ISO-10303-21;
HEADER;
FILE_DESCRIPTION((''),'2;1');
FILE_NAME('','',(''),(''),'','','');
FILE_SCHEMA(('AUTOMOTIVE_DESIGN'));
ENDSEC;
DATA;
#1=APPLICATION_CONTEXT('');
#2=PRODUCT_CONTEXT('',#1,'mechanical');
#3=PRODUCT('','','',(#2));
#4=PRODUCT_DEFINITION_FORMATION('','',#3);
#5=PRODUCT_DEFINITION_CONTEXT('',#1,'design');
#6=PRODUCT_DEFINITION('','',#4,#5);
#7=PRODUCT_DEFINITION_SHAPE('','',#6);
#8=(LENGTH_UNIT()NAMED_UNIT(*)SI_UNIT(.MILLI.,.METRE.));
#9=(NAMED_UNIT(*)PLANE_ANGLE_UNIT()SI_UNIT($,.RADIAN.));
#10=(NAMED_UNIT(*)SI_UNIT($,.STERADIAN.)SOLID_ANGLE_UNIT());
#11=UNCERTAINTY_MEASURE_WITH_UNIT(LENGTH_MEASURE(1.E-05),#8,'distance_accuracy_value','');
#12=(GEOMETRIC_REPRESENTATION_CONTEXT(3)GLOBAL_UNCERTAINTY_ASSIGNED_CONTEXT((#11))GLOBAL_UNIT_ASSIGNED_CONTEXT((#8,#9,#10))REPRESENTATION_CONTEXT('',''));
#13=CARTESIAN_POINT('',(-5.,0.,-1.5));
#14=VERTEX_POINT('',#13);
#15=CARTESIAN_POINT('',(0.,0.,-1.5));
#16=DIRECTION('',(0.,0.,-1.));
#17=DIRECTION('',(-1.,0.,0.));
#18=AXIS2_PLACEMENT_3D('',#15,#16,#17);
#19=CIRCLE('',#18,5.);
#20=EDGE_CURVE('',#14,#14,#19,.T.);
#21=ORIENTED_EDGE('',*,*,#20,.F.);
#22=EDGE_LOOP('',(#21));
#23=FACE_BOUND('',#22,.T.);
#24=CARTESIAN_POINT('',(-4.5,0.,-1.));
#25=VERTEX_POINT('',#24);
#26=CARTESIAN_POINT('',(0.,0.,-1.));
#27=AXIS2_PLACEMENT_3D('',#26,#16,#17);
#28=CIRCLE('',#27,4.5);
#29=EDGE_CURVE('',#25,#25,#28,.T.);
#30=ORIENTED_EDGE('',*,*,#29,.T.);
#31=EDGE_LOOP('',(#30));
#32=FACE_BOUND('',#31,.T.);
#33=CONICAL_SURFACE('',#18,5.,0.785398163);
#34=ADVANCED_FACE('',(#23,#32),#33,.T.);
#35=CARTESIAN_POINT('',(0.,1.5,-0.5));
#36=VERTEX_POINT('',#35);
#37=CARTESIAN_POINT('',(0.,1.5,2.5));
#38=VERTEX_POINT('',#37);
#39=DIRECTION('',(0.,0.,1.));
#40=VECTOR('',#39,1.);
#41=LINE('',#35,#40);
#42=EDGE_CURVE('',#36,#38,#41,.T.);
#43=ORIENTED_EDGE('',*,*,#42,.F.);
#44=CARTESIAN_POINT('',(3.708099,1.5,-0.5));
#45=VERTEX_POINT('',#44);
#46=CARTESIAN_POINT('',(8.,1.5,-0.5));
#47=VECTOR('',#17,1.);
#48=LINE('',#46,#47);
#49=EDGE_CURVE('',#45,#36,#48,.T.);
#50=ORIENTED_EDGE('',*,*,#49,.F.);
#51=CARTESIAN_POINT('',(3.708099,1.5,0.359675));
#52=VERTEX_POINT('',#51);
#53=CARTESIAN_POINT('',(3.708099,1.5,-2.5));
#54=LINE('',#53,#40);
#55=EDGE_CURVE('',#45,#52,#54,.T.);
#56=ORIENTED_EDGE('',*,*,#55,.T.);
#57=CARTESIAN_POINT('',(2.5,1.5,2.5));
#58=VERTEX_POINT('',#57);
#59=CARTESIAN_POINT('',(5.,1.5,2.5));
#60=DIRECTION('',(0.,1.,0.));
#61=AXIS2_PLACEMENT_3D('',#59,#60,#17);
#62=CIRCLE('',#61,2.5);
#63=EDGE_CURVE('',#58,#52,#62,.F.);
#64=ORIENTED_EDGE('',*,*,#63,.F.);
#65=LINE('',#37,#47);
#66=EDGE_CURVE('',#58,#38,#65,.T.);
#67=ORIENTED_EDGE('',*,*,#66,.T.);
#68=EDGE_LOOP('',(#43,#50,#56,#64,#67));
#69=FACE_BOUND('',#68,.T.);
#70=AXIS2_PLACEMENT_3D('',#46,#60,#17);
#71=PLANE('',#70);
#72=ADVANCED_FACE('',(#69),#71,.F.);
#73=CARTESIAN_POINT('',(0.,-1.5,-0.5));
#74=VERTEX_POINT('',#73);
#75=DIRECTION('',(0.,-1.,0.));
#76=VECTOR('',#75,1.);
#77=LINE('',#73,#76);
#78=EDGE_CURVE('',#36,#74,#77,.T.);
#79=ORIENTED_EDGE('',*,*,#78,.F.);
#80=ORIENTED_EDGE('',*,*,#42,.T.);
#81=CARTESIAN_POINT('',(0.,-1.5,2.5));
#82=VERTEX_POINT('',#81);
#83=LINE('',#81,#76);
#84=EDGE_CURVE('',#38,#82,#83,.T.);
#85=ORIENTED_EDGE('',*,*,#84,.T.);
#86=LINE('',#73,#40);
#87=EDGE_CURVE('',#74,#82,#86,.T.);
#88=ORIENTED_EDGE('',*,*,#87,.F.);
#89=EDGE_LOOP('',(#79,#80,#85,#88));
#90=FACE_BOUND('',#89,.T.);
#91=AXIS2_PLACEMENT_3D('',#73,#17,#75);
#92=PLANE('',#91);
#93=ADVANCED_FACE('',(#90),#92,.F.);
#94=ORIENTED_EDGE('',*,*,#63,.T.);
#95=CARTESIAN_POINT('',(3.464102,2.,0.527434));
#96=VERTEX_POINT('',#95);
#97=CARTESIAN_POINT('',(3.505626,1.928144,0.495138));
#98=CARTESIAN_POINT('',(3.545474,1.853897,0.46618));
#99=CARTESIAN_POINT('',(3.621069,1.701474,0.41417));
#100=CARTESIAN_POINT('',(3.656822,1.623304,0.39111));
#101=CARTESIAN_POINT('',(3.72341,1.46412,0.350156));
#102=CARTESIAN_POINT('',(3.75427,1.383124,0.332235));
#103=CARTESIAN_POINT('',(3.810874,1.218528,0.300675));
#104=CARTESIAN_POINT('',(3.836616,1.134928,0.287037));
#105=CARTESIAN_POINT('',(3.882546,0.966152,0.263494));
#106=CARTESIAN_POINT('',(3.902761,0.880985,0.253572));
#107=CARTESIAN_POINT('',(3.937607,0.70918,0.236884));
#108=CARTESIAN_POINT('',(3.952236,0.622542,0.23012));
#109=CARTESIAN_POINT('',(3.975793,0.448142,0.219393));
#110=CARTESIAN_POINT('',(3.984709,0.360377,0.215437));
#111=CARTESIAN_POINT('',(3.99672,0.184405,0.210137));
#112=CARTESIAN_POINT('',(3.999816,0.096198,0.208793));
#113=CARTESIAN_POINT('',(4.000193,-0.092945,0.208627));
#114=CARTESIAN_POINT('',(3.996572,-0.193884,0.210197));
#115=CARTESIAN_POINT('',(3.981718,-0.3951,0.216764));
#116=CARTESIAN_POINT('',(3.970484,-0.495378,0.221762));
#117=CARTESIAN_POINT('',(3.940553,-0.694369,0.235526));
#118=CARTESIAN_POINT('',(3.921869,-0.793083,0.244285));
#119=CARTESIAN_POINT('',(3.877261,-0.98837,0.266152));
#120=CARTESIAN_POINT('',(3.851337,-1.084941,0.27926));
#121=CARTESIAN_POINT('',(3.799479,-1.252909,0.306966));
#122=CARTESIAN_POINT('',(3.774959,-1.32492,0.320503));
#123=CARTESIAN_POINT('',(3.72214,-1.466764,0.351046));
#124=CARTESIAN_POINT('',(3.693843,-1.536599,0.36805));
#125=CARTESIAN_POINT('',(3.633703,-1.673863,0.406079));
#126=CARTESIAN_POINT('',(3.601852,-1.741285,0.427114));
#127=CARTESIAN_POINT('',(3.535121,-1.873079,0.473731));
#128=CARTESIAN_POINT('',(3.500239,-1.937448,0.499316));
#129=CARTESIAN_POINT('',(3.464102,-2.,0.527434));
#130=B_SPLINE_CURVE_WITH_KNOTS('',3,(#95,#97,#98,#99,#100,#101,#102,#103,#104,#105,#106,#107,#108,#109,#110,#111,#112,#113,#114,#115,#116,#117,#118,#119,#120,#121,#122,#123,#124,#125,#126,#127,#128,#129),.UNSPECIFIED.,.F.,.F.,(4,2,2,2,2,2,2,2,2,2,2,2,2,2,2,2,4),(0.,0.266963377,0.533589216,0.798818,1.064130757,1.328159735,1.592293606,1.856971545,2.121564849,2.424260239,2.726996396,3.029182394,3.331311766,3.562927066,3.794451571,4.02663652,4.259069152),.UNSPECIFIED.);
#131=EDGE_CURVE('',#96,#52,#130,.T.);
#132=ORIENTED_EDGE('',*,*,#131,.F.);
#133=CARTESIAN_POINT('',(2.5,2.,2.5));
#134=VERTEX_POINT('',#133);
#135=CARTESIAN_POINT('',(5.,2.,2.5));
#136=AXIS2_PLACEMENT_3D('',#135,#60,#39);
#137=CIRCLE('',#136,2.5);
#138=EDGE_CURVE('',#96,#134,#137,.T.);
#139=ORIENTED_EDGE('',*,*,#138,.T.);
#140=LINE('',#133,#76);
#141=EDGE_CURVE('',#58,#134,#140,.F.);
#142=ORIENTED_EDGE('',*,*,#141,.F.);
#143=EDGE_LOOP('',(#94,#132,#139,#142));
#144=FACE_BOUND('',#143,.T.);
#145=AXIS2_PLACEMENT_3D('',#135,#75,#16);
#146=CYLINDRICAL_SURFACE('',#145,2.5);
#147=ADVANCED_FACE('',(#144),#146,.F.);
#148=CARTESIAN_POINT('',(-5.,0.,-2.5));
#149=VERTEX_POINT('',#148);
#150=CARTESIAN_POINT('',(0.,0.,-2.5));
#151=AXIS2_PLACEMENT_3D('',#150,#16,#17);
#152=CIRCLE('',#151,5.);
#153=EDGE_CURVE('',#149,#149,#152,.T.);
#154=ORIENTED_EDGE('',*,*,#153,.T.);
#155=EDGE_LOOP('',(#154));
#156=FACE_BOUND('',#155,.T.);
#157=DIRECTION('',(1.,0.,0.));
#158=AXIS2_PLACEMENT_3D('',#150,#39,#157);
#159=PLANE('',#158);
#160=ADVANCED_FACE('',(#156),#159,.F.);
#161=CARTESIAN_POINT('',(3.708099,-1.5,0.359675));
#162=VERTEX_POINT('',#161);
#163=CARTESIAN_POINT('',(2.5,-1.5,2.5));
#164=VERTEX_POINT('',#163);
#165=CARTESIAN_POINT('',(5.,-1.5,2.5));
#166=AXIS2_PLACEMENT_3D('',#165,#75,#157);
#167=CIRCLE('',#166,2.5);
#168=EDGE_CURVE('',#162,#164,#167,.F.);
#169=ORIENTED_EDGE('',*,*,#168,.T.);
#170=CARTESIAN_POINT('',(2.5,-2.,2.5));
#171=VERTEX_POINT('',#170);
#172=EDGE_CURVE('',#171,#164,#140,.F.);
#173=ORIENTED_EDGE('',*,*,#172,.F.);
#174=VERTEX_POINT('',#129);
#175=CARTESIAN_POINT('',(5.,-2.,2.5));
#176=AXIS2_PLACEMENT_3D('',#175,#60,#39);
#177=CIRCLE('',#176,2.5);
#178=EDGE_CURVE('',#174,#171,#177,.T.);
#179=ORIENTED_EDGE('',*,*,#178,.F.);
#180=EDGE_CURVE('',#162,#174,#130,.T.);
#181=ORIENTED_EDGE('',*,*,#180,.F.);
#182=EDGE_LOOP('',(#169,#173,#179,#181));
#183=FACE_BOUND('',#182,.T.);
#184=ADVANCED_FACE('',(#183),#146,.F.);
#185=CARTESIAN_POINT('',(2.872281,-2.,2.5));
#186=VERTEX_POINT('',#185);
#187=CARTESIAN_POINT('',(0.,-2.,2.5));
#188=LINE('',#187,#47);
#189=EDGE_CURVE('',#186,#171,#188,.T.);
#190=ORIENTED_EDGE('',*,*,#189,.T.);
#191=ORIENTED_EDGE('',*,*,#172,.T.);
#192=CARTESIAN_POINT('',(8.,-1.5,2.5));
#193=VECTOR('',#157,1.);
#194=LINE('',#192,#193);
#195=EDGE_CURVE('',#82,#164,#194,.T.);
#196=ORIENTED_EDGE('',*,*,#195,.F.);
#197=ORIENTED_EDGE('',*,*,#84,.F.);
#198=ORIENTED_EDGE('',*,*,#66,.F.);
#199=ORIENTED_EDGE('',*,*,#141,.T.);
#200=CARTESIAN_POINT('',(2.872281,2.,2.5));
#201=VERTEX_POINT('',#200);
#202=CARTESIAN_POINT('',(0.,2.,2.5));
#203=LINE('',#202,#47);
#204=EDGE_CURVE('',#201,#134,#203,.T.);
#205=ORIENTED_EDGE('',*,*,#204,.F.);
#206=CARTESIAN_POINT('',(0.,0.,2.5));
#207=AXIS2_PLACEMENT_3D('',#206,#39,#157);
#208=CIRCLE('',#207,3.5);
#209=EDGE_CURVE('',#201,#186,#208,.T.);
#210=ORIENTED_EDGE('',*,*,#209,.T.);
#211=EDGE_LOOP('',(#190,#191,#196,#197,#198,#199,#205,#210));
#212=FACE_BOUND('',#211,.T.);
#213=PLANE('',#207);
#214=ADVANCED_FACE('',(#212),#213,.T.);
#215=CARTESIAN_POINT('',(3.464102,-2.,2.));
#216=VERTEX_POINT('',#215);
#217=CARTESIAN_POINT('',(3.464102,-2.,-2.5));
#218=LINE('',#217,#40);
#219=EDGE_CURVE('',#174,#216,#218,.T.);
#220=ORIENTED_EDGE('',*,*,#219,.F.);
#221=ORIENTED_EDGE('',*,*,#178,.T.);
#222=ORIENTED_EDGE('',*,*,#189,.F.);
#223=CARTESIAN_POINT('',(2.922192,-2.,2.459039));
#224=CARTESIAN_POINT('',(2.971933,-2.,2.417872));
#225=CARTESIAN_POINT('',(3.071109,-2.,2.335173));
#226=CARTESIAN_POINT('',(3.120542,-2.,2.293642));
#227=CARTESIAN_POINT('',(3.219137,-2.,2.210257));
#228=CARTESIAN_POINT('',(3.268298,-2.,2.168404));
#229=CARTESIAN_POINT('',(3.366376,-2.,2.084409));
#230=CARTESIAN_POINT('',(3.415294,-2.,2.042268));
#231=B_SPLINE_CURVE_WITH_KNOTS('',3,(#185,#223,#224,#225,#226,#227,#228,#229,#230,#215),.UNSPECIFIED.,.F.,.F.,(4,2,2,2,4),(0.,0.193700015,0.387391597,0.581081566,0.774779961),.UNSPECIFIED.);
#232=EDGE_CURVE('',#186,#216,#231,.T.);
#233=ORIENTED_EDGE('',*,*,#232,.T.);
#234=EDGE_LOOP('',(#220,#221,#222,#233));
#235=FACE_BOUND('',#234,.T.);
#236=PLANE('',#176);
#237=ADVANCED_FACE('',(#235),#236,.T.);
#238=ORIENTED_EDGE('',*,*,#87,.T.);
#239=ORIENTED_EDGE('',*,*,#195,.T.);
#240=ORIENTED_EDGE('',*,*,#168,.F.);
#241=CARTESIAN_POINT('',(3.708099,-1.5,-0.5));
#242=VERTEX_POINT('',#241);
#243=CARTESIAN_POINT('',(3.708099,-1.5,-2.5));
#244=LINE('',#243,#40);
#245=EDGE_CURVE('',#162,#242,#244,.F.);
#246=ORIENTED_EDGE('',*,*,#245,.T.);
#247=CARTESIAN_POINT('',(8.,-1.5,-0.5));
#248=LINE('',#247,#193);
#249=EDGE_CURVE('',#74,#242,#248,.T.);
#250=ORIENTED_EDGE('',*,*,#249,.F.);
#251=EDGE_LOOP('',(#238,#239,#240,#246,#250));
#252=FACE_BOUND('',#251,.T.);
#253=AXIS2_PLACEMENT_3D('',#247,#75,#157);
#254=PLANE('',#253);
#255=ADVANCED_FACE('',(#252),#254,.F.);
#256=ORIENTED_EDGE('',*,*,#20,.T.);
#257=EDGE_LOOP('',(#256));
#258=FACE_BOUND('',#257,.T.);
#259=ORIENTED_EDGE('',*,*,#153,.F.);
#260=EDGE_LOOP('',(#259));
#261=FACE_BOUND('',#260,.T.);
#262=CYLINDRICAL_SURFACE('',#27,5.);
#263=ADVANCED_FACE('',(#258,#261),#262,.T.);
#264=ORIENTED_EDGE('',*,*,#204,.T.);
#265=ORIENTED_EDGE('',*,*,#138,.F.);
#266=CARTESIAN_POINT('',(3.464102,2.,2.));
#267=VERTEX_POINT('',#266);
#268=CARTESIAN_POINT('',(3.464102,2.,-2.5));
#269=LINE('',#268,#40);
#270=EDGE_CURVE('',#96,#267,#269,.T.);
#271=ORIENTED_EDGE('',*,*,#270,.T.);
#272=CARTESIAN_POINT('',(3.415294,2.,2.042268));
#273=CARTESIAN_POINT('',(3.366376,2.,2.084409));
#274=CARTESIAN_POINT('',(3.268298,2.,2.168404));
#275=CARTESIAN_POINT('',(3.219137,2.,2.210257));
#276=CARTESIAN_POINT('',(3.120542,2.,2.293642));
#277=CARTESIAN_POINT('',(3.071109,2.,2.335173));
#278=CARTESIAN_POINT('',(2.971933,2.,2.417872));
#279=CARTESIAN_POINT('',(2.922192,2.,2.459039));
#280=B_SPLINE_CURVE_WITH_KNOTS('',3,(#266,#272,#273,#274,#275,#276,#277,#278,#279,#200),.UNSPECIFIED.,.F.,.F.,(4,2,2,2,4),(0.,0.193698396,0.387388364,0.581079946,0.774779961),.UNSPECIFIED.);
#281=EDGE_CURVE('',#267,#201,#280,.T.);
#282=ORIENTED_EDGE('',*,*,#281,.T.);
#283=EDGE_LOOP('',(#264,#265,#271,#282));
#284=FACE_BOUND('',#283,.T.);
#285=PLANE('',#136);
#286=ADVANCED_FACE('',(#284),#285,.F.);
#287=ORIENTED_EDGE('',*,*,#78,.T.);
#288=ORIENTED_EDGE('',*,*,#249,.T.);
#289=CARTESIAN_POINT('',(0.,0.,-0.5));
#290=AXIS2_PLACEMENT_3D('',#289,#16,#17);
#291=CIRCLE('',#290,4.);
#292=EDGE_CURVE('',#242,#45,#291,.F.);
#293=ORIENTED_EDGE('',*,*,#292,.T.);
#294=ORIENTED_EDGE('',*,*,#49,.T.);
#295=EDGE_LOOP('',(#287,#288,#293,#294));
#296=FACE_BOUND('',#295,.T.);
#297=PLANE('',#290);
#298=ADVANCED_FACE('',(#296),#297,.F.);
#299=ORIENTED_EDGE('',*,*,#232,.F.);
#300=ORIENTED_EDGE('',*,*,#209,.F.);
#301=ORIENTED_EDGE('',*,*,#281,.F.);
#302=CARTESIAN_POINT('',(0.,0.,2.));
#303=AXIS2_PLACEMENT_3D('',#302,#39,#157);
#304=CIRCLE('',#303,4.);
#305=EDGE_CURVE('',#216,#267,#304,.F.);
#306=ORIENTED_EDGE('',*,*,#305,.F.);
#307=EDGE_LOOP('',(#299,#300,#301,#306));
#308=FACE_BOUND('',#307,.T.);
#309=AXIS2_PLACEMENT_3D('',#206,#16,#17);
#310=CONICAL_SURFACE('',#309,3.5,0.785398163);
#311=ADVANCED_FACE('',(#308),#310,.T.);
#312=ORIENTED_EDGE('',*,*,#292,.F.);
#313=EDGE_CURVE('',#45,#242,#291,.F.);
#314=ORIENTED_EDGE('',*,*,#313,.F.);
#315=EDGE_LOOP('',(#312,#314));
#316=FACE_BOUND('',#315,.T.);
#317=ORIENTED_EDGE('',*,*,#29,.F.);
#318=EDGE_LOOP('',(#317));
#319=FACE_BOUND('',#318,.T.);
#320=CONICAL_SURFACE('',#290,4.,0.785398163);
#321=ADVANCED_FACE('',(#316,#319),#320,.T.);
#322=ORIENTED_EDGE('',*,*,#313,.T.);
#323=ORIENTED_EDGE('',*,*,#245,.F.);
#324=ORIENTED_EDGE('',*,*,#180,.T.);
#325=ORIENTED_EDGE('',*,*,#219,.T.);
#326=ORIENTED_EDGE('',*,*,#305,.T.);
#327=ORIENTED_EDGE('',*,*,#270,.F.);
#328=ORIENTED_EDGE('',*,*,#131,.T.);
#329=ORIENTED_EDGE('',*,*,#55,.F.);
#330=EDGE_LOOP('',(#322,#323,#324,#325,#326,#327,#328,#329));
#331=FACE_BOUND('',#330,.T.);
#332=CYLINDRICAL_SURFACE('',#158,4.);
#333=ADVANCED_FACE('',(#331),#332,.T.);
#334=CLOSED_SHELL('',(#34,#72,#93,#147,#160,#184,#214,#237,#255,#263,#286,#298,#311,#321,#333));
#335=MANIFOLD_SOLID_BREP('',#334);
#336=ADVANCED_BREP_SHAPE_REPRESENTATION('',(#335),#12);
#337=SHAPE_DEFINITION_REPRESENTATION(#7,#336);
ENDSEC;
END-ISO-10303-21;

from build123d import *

# Parameters (mm, degrees)
BOSS_EXTRUDE1_DEPTH      = 2.5
BOSS_EXTRUDE1_DEPTH_BACK = 2.5
SKETCH1_R                = 4
SKETCH2_W                = 8
SKETCH2_H                = 3
CUT_EXTRUDE1_DEPTH       = 3
CUT_EXTRUDE2_DEPTH       = 2
CUT_EXTRUDE2_DEPTH_BACK  = 2
SKETCH3_R                = 2.5
CHAMFER1_SIZE            = 0.5
SKETCH4_R                = 5
BOSS_EXTRUDE2_DEPTH      = 1.5
CHAMFER2_SIZE            = 0.5
CHAMFER3_SIZE            = 0.5


with BuildPart() as part:
    # Sketch1 → Boss-Extrude1 (new, two sides: drawn at the far end of the back side and taken through both)
    with BuildSketch(Plane.XY.offset(-BOSS_EXTRUDE1_DEPTH_BACK)):
        Circle(SKETCH1_R)
    extrude(amount=BOSS_EXTRUDE1_DEPTH + BOSS_EXTRUDE1_DEPTH_BACK)

    # Sketch2 → Cut-Extrude1 (cut)
    with BuildSketch(Plane.XY.offset(2.5)):
        with Locations((4, 0)):
            Rectangle(SKETCH2_W, SKETCH2_H)
    extrude(amount=-CUT_EXTRUDE1_DEPTH, mode=Mode.SUBTRACT)

    # Sketch3 → Cut-Extrude2 (cut, two sides: drawn at the far end of the back side and taken through both)
    with BuildSketch(Plane(origin=(0, 0, 0), x_dir=(1, 0, 0), z_dir=(0, 1, 0)).offset(-CUT_EXTRUDE2_DEPTH_BACK)):
        with Locations((5, -2.5)):
            Circle(SKETCH3_R)
    extrude(amount=CUT_EXTRUDE2_DEPTH + CUT_EXTRUDE2_DEPTH_BACK, mode=Mode.SUBTRACT)

    # Chamfer1
    chamfer1_edges = [part.edges().sort_by_distance(p)[0] for p in [
        (-4, 0, 2.5),
    ]]
    chamfer(chamfer1_edges, length=CHAMFER1_SIZE)

    # Sketch4 → Boss-Extrude2 (add)
    with BuildSketch(Plane(origin=(0, 0, -2.5), x_dir=(-1, 0, 0), z_dir=(0, 0, -1))):
        Circle(SKETCH4_R)
    extrude(amount=-BOSS_EXTRUDE2_DEPTH)

    # Chamfer2
    chamfer2_edges = [part.edges().sort_by_distance(p)[0] for p in [
        (-4, 0, -1),
    ]]
    chamfer(chamfer2_edges, length=CHAMFER2_SIZE - 0.0001)  # a hair under: the kernel refuses the full size

    # Chamfer3
    chamfer3_edges = [part.edges().sort_by_distance(p)[0] for p in [
        (5, 0, -1),
    ]]
    chamfer(chamfer3_edges, length=CHAMFER3_SIZE)


solid = part.part
